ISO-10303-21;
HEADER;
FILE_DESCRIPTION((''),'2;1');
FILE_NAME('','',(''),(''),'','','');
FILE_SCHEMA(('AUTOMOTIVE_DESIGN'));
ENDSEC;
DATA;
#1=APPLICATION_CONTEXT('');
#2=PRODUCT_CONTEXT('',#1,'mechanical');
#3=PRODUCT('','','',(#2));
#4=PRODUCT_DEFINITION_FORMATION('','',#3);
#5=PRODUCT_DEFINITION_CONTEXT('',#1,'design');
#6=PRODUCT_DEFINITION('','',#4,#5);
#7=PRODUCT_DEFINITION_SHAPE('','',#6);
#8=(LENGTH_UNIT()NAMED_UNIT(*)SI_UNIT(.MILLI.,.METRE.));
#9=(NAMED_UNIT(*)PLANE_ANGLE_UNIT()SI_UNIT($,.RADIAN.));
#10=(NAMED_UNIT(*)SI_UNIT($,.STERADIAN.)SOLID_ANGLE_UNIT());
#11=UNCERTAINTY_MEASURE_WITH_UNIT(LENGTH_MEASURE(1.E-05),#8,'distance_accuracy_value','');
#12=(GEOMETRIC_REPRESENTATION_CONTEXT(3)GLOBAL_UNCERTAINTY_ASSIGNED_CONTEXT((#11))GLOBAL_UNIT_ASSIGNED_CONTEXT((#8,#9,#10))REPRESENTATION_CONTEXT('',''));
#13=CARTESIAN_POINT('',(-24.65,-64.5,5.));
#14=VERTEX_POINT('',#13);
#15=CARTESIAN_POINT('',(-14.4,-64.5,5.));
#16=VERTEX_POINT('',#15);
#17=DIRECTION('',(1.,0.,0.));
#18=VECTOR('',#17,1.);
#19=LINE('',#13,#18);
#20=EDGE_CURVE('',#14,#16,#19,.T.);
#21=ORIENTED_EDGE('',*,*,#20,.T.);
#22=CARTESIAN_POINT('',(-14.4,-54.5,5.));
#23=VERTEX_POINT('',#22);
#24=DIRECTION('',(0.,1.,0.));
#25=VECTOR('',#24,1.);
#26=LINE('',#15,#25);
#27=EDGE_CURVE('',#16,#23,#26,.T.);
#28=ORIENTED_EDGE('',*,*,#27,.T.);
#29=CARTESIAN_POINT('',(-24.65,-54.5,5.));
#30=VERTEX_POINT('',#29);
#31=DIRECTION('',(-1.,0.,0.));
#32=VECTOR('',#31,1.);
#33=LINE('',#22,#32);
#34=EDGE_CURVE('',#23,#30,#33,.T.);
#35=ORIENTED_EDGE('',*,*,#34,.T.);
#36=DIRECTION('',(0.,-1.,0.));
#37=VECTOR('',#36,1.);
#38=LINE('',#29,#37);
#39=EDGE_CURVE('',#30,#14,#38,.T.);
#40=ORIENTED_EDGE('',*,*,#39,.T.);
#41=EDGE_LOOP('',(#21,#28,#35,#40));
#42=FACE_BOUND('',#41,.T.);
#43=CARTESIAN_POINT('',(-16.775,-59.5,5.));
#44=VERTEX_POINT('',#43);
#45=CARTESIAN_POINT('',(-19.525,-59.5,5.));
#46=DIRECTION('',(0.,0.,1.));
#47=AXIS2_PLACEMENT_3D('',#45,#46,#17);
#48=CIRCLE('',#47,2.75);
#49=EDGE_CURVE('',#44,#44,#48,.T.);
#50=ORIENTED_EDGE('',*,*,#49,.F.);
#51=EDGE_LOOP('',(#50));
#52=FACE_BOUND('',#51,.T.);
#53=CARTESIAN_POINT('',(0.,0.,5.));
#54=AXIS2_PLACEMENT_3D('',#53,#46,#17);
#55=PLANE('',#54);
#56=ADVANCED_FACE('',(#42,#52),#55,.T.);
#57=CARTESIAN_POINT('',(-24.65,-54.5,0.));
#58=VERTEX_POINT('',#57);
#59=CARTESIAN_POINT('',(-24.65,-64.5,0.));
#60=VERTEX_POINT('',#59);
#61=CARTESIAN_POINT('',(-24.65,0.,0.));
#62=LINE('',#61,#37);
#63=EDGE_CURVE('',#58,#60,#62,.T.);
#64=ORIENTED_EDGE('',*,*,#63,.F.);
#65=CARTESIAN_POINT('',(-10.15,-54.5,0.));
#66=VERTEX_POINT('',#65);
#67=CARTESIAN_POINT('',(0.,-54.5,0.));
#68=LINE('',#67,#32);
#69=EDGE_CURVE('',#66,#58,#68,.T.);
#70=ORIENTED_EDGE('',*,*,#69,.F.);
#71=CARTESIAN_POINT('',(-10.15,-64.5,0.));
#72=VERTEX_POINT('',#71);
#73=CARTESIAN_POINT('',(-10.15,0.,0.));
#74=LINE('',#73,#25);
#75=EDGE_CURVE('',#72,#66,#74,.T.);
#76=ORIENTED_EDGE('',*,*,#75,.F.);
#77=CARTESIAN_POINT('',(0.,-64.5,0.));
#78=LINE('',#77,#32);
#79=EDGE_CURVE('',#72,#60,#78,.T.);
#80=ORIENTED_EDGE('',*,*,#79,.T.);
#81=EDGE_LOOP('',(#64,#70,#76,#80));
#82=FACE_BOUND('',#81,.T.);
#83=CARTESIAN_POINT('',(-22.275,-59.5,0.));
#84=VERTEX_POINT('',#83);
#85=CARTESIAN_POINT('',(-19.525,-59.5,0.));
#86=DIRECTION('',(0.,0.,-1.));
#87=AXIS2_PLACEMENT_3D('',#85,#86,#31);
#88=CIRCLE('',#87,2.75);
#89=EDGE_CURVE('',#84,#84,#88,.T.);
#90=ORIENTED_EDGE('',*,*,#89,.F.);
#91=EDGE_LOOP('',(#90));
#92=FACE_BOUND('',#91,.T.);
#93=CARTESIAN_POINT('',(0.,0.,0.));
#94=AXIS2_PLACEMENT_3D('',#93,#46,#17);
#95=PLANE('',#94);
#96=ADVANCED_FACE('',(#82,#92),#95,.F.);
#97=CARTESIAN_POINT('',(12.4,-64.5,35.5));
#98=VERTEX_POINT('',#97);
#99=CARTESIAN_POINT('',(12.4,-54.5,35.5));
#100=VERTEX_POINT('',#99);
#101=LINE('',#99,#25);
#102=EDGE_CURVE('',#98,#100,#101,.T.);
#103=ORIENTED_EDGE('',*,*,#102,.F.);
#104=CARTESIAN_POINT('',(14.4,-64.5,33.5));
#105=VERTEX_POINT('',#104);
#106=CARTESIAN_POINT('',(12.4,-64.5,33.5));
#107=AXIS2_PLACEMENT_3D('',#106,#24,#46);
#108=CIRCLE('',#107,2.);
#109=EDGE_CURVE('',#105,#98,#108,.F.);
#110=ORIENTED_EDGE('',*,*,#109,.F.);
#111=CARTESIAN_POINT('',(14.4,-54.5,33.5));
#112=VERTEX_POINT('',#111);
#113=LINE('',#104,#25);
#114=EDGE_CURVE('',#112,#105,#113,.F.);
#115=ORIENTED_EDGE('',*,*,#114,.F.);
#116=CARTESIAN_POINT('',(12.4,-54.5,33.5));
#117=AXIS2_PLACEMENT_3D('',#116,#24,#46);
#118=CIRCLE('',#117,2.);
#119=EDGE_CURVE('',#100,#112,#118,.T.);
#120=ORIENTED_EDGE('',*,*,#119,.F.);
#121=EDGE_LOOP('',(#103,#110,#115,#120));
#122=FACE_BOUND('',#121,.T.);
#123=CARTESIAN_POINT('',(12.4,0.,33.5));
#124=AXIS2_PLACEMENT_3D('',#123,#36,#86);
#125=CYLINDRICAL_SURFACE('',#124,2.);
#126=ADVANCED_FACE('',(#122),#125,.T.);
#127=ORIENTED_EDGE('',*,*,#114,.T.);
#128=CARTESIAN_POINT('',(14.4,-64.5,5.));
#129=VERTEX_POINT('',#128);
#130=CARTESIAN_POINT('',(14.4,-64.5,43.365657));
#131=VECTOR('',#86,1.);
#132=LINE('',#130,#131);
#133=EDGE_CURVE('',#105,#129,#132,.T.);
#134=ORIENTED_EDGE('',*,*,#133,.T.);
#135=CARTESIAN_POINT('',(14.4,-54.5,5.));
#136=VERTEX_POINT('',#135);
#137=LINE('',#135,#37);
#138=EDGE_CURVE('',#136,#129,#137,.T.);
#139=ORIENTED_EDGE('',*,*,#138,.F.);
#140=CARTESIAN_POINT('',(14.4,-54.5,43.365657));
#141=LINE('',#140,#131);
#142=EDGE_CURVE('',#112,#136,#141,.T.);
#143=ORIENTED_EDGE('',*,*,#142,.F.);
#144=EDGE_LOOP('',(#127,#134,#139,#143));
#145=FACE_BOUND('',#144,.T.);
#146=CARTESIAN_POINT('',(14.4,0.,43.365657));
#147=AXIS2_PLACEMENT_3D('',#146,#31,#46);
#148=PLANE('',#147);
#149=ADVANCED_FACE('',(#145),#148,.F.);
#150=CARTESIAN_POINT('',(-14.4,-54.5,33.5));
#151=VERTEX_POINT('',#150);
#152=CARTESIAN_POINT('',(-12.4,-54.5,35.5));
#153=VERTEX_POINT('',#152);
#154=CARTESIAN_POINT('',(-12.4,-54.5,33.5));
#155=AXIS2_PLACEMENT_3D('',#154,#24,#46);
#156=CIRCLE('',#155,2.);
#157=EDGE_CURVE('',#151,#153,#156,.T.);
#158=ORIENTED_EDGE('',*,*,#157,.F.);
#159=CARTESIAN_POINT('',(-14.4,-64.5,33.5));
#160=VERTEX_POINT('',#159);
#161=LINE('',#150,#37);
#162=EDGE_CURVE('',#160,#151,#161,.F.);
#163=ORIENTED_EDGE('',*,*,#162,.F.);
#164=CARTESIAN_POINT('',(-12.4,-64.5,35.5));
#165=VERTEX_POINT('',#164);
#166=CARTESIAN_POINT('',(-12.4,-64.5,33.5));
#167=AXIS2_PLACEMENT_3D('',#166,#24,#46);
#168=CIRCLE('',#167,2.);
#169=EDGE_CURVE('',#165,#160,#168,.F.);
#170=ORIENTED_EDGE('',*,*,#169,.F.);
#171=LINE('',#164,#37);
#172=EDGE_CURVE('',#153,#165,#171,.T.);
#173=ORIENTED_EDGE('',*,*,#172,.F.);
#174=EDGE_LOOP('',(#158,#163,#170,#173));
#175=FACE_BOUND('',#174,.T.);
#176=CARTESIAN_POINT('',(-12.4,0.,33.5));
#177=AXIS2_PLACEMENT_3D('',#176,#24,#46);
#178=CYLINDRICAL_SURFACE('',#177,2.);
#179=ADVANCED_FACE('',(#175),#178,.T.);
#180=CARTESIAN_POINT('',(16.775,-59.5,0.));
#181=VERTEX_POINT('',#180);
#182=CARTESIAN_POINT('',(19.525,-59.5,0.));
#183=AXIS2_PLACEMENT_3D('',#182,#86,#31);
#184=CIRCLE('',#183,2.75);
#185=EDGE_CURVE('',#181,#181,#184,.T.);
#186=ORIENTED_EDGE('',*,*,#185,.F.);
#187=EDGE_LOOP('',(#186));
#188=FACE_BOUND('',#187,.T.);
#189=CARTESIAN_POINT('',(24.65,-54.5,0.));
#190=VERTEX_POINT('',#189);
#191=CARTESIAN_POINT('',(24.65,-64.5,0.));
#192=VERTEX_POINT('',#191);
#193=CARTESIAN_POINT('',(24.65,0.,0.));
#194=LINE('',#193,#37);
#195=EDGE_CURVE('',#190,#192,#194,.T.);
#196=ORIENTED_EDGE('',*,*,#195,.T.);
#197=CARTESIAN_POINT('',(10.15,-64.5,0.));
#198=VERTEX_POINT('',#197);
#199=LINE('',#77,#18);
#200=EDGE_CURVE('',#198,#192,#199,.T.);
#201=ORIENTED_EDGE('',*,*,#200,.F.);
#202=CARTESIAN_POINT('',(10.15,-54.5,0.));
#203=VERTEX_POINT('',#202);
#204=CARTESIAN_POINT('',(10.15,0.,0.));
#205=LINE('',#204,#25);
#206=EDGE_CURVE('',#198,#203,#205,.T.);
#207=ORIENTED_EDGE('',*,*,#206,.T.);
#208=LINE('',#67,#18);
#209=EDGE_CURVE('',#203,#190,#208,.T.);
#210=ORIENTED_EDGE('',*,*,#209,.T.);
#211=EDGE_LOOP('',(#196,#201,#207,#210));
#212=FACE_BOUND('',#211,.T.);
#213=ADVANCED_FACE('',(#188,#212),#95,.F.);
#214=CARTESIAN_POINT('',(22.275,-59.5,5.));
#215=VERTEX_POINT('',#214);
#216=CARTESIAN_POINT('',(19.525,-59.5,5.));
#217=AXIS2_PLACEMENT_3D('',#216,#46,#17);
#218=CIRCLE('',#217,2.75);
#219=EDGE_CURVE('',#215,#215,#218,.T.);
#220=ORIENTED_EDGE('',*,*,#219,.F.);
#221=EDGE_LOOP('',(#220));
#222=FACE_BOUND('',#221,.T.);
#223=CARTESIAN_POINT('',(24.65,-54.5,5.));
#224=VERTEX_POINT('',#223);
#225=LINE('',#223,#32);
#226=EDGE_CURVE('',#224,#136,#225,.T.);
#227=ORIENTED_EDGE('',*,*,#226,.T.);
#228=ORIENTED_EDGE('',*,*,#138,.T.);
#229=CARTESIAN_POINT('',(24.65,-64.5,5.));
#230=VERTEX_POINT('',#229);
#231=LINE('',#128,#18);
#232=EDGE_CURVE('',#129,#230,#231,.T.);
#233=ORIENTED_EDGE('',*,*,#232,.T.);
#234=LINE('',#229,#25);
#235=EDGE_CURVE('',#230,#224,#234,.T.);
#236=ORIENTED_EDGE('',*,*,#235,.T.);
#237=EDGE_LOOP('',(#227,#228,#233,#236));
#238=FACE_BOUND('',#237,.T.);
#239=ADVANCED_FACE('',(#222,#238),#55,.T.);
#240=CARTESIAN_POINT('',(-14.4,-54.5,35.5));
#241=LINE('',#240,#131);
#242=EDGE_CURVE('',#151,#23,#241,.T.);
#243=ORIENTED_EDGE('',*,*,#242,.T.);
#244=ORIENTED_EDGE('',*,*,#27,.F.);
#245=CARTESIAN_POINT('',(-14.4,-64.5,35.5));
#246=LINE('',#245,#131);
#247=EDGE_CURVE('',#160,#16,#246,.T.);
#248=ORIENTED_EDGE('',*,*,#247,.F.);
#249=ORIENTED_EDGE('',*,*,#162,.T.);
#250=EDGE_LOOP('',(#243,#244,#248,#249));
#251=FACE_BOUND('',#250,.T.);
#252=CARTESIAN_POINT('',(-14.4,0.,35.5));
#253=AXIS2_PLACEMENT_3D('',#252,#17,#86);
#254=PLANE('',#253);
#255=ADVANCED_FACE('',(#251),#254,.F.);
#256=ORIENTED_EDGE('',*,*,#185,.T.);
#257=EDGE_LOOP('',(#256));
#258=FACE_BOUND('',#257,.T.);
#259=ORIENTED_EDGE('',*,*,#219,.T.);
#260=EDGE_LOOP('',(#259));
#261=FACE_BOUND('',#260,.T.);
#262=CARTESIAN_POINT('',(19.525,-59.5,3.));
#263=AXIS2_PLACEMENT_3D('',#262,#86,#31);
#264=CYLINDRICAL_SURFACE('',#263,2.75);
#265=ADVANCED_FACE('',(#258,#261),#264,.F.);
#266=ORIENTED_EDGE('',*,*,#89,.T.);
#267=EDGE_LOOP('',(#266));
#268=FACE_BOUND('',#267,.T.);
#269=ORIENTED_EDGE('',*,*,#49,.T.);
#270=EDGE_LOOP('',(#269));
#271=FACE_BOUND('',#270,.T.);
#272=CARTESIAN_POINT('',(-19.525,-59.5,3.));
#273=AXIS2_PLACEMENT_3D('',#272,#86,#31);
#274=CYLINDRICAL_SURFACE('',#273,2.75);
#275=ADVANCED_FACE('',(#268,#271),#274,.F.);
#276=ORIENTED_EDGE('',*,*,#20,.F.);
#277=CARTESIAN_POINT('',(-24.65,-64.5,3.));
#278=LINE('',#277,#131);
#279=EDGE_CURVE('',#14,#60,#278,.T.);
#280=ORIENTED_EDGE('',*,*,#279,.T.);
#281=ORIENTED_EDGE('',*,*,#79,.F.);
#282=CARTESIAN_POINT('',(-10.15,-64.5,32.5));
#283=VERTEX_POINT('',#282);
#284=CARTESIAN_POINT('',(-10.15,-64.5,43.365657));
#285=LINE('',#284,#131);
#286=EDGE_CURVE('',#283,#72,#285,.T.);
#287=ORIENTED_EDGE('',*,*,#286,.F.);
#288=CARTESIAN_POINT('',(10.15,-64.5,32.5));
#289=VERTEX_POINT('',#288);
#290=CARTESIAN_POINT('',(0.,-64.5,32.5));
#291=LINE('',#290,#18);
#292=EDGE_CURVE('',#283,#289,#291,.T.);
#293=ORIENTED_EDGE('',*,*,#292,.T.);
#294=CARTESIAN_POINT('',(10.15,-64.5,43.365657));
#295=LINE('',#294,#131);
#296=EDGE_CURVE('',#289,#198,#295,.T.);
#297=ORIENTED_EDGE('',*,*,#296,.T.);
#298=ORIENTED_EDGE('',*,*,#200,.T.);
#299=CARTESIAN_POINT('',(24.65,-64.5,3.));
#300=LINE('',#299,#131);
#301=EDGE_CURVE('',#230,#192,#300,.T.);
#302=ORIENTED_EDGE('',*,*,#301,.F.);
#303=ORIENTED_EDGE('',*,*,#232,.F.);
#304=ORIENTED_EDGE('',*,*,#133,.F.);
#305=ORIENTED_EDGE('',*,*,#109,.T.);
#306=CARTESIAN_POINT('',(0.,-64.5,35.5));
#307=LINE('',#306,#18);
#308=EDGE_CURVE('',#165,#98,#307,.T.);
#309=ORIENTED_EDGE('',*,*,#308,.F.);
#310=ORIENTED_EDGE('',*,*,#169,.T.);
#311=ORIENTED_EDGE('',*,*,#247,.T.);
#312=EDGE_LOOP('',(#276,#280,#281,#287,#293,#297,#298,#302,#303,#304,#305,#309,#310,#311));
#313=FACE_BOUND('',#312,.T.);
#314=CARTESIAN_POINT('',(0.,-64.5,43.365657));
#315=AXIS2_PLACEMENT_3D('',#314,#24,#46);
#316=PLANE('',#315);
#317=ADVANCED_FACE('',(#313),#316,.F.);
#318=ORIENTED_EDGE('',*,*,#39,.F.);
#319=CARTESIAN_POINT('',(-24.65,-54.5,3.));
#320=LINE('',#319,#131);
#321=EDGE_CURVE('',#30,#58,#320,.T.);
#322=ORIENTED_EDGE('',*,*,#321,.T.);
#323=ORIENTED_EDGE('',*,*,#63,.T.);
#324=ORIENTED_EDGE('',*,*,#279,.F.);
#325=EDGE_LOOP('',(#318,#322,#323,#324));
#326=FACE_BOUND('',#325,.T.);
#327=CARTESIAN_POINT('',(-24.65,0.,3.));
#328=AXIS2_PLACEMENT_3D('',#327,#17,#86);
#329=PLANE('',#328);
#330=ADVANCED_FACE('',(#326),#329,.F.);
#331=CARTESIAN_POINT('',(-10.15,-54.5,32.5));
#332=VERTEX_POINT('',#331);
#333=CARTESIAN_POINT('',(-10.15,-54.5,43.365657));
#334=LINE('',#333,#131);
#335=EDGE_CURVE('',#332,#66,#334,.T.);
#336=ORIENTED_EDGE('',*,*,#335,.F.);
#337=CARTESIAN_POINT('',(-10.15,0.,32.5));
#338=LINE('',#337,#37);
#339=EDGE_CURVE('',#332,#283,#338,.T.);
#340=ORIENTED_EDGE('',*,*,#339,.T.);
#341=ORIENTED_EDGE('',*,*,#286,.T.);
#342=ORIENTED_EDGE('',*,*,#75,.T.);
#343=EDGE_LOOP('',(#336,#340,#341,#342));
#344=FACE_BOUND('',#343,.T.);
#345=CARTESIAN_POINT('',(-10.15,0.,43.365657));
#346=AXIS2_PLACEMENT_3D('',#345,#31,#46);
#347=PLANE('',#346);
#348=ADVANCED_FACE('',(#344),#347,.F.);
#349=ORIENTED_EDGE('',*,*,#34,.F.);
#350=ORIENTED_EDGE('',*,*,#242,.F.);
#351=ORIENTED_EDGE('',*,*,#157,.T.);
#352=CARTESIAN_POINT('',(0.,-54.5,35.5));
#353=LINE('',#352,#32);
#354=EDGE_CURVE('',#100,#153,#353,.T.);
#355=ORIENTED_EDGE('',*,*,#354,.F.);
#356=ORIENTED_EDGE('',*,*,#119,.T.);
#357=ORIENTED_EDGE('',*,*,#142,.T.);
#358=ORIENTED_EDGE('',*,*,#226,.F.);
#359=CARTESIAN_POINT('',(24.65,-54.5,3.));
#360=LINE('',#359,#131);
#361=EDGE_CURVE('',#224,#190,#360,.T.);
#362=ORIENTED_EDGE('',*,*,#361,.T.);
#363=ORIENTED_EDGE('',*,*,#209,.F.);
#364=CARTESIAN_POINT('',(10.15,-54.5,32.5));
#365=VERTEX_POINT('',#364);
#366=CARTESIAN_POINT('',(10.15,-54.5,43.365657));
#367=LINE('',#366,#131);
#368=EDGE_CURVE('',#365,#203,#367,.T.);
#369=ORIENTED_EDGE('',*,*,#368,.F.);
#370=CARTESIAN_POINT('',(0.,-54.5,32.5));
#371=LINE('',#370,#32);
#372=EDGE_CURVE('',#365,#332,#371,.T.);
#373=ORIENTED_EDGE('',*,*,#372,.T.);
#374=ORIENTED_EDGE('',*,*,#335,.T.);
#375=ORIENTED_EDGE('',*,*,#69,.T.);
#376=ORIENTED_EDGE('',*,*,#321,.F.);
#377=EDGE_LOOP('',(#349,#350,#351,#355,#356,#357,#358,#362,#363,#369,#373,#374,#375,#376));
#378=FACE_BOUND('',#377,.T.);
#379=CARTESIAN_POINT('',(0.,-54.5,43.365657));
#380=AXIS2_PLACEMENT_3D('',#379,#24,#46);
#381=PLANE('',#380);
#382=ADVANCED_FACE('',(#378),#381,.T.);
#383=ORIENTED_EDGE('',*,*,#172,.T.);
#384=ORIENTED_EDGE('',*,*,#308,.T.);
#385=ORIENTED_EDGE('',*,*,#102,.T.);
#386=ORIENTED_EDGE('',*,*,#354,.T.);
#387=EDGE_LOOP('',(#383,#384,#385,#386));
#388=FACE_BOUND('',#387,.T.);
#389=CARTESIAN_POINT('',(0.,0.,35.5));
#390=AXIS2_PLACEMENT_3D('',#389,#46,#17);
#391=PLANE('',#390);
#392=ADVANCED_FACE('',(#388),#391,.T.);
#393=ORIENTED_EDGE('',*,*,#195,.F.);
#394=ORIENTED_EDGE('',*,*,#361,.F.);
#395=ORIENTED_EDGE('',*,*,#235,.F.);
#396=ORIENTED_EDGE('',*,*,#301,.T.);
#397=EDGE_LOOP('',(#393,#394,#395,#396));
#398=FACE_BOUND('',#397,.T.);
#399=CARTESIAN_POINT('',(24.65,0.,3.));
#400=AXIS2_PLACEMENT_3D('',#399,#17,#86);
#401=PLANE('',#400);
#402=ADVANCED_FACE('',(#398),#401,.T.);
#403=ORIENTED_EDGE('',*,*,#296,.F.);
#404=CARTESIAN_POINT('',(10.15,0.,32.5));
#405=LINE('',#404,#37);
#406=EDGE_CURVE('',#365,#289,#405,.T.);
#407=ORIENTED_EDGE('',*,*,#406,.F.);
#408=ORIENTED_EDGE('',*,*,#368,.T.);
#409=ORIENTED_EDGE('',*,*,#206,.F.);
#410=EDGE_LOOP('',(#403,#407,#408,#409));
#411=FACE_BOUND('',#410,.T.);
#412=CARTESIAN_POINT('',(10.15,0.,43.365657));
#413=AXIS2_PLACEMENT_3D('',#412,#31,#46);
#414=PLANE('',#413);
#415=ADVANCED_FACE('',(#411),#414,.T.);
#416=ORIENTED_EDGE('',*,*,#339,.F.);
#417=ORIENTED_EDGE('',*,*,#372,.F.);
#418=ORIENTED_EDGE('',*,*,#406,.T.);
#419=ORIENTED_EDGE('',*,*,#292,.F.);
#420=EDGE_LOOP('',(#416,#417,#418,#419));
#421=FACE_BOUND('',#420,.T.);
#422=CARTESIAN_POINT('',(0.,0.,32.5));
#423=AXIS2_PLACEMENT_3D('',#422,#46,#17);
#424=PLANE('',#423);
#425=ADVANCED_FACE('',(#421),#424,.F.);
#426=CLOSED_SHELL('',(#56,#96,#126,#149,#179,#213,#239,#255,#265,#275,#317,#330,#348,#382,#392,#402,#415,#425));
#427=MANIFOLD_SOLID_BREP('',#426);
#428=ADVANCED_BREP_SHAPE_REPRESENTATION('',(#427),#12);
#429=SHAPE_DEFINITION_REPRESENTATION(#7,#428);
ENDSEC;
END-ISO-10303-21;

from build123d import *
from build123d.topology import SkipClean

# Parameters (mm, degrees)
SKETCH2_W             = 4.25
SKETCH2_H             = 10
BOSS_EXTRUDE1_DEPTH   = 32.5
BOSS_EXTRUDE1_2_DEPTH = 32.5
SKETCH3_W             = 28.8
SKETCH3_H             = 10
BOSS_EXTRUDE2_DEPTH   = 3
SKETCH4_W             = 8.25
SKETCH4_H             = 10
SKETCH4_W_2           = 12.5
SKETCH4_W_3           = 4.25
BOSS_EXTRUDE3_DEPTH   = 3
SKETCH5_W             = 2
SKETCH5_H             = 10
BOSS_EXTRUDE4_DEPTH   = 3
CUT_EXTRUDE1_DEPTH    = 3
SKETCH7_W             = 10.25
SKETCH7_H             = 10
SKETCH7_R             = 2.75
BOSS_EXTRUDE5_DEPTH   = 2
FILLET1_R             = 2


with BuildPart() as part:
    # Sketch2 → Boss-Extrude1 (new body)
    with BuildSketch(Plane.XY):
        with Locations((-12.275, -59.5)):
            Rectangle(SKETCH2_W, SKETCH2_H)
    extrude(amount=BOSS_EXTRUDE1_DEPTH)



with BuildPart() as body_2:
    # Sketch2 → Boss-Extrude1 2 (new body)
    with BuildSketch(Plane.XY):
        with Locations((12.275, -59.5)):
            Rectangle(SKETCH2_W, SKETCH2_H)
    extrude(amount=BOSS_EXTRUDE1_2_DEPTH)


with BuildPart() as part_1:
    add(part.part)

    add(body_2.part)  # Boss-Extrude2 merges body 2
    # Sketch3 → Boss-Extrude2 (add)
    with BuildSketch(Plane.XY.offset(32.5)):
        with Locations((0, -59.5)):
            Rectangle(SKETCH3_W, SKETCH3_H)
    extrude(amount=BOSS_EXTRUDE2_DEPTH)

    # Sketch4 → Boss-Extrude3 (add)
    with BuildSketch(Plane(origin=(0, 0, 0), x_dir=(-1, 0, 0), z_dir=(0, 0, -1))):
        with Locations((18.525, -59.5)):
            Rectangle(SKETCH4_W, SKETCH4_H)
        with Locations((-16.4, -59.5)):
            Rectangle(SKETCH4_W_2, SKETCH4_H)
        with Locations((12.275, -59.5)):
            Rectangle(SKETCH4_W_3, SKETCH4_H)
    extrude(amount=-BOSS_EXTRUDE3_DEPTH)

    # Sketch5 → Boss-Extrude4 (add)
    with BuildSketch(Plane(origin=(0, 0, 0), x_dir=(-1, 0, 0), z_dir=(0, 0, -1))):
        with Locations((23.65, -59.5)):
            Rectangle(SKETCH5_W, SKETCH5_H)
        with Locations((-23.65, -59.5)):
            Rectangle(SKETCH5_W, SKETCH5_H)
    extrude(amount=-BOSS_EXTRUDE4_DEPTH)

    # Sketch6 → Cut-Extrude1 (cut)
    with BuildSketch(Plane(origin=(0, 0, 0), x_dir=(-1, 0, 0), z_dir=(0, 0, -1))):
        with BuildLine():
            ThreePointArc((22.275, -59.5), (20.561677147, -56.952883887), (17.556599642, -57.579609407))
            Line((17.556599642, -57.579609407), (21.493400358, -61.420390593))
            ThreePointArc((21.493400358, -61.420390593), (22.072116113, -60.536677147), (22.275, -59.5))
        make_face()
        with BuildLine():
            Line((21.493400358, -61.420390593), (17.556599642, -57.579609407))
            ThreePointArc((17.556599642, -57.579609407), (17.604609407, -61.468400358), (21.493400358, -61.420390593))
        make_face()
        with BuildLine():
            ThreePointArc((-16.775, -59.5), (-16.977883887, -58.463322853), (-17.556599642, -57.579609407))
            Line((-17.556599642, -57.579609407), (-21.493400358, -61.420390593))
            ThreePointArc((-21.493400358, -61.420390593), (-18.488322853, -62.047116113), (-16.775, -59.5))
        make_face()
        with BuildLine():
            Line((-21.493400358, -61.420390593), (-17.556599642, -57.579609407))
            ThreePointArc((-17.556599642, -57.579609407), (-21.445390593, -57.531599642), (-21.493400358, -61.420390593))
        make_face()
    extrude(amount=-CUT_EXTRUDE1_DEPTH, mode=Mode.SUBTRACT)

    # Sketch7 → Boss-Extrude5 (add)
    # profile 1 of 2: a face of its own
    with SkipClean():  # the faces are left unmerged after this step: merging them gives an invalid solid
        with BuildSketch(Plane.XY.offset(3)):
            with Locations((-19.525, -59.5)):
                Rectangle(SKETCH7_W, SKETCH7_H)
            with Locations(Location((-19.525, -59.5, 0), (0, 0, 180))):
                Circle(SKETCH7_R, mode=Mode.SUBTRACT)
        # profile 2 of 2: a face of its own
        with BuildSketch(Plane.XY.offset(3)):
            with Locations((19.525, -59.5)):
                Rectangle(SKETCH7_W, SKETCH7_H)
            with Locations(Location((19.525, -59.5, 0), (0, 0, 180))):
                Circle(SKETCH7_R, mode=Mode.SUBTRACT)
        extrude(amount=BOSS_EXTRUDE5_DEPTH)
    add(part_1.part.scale(1), mode=Mode.REPLACE)  # the faces are merged on a copy

    # Fillet1
    fillet1_edges = [part_1.edges().sort_by_distance(p)[0] for p in [
        (14.4, -59.5, 35.5),
        (-14.4, -59.5, 35.5),
    ]]
    fillet(fillet1_edges, radius=FILLET1_R)


solid = part_1.part
